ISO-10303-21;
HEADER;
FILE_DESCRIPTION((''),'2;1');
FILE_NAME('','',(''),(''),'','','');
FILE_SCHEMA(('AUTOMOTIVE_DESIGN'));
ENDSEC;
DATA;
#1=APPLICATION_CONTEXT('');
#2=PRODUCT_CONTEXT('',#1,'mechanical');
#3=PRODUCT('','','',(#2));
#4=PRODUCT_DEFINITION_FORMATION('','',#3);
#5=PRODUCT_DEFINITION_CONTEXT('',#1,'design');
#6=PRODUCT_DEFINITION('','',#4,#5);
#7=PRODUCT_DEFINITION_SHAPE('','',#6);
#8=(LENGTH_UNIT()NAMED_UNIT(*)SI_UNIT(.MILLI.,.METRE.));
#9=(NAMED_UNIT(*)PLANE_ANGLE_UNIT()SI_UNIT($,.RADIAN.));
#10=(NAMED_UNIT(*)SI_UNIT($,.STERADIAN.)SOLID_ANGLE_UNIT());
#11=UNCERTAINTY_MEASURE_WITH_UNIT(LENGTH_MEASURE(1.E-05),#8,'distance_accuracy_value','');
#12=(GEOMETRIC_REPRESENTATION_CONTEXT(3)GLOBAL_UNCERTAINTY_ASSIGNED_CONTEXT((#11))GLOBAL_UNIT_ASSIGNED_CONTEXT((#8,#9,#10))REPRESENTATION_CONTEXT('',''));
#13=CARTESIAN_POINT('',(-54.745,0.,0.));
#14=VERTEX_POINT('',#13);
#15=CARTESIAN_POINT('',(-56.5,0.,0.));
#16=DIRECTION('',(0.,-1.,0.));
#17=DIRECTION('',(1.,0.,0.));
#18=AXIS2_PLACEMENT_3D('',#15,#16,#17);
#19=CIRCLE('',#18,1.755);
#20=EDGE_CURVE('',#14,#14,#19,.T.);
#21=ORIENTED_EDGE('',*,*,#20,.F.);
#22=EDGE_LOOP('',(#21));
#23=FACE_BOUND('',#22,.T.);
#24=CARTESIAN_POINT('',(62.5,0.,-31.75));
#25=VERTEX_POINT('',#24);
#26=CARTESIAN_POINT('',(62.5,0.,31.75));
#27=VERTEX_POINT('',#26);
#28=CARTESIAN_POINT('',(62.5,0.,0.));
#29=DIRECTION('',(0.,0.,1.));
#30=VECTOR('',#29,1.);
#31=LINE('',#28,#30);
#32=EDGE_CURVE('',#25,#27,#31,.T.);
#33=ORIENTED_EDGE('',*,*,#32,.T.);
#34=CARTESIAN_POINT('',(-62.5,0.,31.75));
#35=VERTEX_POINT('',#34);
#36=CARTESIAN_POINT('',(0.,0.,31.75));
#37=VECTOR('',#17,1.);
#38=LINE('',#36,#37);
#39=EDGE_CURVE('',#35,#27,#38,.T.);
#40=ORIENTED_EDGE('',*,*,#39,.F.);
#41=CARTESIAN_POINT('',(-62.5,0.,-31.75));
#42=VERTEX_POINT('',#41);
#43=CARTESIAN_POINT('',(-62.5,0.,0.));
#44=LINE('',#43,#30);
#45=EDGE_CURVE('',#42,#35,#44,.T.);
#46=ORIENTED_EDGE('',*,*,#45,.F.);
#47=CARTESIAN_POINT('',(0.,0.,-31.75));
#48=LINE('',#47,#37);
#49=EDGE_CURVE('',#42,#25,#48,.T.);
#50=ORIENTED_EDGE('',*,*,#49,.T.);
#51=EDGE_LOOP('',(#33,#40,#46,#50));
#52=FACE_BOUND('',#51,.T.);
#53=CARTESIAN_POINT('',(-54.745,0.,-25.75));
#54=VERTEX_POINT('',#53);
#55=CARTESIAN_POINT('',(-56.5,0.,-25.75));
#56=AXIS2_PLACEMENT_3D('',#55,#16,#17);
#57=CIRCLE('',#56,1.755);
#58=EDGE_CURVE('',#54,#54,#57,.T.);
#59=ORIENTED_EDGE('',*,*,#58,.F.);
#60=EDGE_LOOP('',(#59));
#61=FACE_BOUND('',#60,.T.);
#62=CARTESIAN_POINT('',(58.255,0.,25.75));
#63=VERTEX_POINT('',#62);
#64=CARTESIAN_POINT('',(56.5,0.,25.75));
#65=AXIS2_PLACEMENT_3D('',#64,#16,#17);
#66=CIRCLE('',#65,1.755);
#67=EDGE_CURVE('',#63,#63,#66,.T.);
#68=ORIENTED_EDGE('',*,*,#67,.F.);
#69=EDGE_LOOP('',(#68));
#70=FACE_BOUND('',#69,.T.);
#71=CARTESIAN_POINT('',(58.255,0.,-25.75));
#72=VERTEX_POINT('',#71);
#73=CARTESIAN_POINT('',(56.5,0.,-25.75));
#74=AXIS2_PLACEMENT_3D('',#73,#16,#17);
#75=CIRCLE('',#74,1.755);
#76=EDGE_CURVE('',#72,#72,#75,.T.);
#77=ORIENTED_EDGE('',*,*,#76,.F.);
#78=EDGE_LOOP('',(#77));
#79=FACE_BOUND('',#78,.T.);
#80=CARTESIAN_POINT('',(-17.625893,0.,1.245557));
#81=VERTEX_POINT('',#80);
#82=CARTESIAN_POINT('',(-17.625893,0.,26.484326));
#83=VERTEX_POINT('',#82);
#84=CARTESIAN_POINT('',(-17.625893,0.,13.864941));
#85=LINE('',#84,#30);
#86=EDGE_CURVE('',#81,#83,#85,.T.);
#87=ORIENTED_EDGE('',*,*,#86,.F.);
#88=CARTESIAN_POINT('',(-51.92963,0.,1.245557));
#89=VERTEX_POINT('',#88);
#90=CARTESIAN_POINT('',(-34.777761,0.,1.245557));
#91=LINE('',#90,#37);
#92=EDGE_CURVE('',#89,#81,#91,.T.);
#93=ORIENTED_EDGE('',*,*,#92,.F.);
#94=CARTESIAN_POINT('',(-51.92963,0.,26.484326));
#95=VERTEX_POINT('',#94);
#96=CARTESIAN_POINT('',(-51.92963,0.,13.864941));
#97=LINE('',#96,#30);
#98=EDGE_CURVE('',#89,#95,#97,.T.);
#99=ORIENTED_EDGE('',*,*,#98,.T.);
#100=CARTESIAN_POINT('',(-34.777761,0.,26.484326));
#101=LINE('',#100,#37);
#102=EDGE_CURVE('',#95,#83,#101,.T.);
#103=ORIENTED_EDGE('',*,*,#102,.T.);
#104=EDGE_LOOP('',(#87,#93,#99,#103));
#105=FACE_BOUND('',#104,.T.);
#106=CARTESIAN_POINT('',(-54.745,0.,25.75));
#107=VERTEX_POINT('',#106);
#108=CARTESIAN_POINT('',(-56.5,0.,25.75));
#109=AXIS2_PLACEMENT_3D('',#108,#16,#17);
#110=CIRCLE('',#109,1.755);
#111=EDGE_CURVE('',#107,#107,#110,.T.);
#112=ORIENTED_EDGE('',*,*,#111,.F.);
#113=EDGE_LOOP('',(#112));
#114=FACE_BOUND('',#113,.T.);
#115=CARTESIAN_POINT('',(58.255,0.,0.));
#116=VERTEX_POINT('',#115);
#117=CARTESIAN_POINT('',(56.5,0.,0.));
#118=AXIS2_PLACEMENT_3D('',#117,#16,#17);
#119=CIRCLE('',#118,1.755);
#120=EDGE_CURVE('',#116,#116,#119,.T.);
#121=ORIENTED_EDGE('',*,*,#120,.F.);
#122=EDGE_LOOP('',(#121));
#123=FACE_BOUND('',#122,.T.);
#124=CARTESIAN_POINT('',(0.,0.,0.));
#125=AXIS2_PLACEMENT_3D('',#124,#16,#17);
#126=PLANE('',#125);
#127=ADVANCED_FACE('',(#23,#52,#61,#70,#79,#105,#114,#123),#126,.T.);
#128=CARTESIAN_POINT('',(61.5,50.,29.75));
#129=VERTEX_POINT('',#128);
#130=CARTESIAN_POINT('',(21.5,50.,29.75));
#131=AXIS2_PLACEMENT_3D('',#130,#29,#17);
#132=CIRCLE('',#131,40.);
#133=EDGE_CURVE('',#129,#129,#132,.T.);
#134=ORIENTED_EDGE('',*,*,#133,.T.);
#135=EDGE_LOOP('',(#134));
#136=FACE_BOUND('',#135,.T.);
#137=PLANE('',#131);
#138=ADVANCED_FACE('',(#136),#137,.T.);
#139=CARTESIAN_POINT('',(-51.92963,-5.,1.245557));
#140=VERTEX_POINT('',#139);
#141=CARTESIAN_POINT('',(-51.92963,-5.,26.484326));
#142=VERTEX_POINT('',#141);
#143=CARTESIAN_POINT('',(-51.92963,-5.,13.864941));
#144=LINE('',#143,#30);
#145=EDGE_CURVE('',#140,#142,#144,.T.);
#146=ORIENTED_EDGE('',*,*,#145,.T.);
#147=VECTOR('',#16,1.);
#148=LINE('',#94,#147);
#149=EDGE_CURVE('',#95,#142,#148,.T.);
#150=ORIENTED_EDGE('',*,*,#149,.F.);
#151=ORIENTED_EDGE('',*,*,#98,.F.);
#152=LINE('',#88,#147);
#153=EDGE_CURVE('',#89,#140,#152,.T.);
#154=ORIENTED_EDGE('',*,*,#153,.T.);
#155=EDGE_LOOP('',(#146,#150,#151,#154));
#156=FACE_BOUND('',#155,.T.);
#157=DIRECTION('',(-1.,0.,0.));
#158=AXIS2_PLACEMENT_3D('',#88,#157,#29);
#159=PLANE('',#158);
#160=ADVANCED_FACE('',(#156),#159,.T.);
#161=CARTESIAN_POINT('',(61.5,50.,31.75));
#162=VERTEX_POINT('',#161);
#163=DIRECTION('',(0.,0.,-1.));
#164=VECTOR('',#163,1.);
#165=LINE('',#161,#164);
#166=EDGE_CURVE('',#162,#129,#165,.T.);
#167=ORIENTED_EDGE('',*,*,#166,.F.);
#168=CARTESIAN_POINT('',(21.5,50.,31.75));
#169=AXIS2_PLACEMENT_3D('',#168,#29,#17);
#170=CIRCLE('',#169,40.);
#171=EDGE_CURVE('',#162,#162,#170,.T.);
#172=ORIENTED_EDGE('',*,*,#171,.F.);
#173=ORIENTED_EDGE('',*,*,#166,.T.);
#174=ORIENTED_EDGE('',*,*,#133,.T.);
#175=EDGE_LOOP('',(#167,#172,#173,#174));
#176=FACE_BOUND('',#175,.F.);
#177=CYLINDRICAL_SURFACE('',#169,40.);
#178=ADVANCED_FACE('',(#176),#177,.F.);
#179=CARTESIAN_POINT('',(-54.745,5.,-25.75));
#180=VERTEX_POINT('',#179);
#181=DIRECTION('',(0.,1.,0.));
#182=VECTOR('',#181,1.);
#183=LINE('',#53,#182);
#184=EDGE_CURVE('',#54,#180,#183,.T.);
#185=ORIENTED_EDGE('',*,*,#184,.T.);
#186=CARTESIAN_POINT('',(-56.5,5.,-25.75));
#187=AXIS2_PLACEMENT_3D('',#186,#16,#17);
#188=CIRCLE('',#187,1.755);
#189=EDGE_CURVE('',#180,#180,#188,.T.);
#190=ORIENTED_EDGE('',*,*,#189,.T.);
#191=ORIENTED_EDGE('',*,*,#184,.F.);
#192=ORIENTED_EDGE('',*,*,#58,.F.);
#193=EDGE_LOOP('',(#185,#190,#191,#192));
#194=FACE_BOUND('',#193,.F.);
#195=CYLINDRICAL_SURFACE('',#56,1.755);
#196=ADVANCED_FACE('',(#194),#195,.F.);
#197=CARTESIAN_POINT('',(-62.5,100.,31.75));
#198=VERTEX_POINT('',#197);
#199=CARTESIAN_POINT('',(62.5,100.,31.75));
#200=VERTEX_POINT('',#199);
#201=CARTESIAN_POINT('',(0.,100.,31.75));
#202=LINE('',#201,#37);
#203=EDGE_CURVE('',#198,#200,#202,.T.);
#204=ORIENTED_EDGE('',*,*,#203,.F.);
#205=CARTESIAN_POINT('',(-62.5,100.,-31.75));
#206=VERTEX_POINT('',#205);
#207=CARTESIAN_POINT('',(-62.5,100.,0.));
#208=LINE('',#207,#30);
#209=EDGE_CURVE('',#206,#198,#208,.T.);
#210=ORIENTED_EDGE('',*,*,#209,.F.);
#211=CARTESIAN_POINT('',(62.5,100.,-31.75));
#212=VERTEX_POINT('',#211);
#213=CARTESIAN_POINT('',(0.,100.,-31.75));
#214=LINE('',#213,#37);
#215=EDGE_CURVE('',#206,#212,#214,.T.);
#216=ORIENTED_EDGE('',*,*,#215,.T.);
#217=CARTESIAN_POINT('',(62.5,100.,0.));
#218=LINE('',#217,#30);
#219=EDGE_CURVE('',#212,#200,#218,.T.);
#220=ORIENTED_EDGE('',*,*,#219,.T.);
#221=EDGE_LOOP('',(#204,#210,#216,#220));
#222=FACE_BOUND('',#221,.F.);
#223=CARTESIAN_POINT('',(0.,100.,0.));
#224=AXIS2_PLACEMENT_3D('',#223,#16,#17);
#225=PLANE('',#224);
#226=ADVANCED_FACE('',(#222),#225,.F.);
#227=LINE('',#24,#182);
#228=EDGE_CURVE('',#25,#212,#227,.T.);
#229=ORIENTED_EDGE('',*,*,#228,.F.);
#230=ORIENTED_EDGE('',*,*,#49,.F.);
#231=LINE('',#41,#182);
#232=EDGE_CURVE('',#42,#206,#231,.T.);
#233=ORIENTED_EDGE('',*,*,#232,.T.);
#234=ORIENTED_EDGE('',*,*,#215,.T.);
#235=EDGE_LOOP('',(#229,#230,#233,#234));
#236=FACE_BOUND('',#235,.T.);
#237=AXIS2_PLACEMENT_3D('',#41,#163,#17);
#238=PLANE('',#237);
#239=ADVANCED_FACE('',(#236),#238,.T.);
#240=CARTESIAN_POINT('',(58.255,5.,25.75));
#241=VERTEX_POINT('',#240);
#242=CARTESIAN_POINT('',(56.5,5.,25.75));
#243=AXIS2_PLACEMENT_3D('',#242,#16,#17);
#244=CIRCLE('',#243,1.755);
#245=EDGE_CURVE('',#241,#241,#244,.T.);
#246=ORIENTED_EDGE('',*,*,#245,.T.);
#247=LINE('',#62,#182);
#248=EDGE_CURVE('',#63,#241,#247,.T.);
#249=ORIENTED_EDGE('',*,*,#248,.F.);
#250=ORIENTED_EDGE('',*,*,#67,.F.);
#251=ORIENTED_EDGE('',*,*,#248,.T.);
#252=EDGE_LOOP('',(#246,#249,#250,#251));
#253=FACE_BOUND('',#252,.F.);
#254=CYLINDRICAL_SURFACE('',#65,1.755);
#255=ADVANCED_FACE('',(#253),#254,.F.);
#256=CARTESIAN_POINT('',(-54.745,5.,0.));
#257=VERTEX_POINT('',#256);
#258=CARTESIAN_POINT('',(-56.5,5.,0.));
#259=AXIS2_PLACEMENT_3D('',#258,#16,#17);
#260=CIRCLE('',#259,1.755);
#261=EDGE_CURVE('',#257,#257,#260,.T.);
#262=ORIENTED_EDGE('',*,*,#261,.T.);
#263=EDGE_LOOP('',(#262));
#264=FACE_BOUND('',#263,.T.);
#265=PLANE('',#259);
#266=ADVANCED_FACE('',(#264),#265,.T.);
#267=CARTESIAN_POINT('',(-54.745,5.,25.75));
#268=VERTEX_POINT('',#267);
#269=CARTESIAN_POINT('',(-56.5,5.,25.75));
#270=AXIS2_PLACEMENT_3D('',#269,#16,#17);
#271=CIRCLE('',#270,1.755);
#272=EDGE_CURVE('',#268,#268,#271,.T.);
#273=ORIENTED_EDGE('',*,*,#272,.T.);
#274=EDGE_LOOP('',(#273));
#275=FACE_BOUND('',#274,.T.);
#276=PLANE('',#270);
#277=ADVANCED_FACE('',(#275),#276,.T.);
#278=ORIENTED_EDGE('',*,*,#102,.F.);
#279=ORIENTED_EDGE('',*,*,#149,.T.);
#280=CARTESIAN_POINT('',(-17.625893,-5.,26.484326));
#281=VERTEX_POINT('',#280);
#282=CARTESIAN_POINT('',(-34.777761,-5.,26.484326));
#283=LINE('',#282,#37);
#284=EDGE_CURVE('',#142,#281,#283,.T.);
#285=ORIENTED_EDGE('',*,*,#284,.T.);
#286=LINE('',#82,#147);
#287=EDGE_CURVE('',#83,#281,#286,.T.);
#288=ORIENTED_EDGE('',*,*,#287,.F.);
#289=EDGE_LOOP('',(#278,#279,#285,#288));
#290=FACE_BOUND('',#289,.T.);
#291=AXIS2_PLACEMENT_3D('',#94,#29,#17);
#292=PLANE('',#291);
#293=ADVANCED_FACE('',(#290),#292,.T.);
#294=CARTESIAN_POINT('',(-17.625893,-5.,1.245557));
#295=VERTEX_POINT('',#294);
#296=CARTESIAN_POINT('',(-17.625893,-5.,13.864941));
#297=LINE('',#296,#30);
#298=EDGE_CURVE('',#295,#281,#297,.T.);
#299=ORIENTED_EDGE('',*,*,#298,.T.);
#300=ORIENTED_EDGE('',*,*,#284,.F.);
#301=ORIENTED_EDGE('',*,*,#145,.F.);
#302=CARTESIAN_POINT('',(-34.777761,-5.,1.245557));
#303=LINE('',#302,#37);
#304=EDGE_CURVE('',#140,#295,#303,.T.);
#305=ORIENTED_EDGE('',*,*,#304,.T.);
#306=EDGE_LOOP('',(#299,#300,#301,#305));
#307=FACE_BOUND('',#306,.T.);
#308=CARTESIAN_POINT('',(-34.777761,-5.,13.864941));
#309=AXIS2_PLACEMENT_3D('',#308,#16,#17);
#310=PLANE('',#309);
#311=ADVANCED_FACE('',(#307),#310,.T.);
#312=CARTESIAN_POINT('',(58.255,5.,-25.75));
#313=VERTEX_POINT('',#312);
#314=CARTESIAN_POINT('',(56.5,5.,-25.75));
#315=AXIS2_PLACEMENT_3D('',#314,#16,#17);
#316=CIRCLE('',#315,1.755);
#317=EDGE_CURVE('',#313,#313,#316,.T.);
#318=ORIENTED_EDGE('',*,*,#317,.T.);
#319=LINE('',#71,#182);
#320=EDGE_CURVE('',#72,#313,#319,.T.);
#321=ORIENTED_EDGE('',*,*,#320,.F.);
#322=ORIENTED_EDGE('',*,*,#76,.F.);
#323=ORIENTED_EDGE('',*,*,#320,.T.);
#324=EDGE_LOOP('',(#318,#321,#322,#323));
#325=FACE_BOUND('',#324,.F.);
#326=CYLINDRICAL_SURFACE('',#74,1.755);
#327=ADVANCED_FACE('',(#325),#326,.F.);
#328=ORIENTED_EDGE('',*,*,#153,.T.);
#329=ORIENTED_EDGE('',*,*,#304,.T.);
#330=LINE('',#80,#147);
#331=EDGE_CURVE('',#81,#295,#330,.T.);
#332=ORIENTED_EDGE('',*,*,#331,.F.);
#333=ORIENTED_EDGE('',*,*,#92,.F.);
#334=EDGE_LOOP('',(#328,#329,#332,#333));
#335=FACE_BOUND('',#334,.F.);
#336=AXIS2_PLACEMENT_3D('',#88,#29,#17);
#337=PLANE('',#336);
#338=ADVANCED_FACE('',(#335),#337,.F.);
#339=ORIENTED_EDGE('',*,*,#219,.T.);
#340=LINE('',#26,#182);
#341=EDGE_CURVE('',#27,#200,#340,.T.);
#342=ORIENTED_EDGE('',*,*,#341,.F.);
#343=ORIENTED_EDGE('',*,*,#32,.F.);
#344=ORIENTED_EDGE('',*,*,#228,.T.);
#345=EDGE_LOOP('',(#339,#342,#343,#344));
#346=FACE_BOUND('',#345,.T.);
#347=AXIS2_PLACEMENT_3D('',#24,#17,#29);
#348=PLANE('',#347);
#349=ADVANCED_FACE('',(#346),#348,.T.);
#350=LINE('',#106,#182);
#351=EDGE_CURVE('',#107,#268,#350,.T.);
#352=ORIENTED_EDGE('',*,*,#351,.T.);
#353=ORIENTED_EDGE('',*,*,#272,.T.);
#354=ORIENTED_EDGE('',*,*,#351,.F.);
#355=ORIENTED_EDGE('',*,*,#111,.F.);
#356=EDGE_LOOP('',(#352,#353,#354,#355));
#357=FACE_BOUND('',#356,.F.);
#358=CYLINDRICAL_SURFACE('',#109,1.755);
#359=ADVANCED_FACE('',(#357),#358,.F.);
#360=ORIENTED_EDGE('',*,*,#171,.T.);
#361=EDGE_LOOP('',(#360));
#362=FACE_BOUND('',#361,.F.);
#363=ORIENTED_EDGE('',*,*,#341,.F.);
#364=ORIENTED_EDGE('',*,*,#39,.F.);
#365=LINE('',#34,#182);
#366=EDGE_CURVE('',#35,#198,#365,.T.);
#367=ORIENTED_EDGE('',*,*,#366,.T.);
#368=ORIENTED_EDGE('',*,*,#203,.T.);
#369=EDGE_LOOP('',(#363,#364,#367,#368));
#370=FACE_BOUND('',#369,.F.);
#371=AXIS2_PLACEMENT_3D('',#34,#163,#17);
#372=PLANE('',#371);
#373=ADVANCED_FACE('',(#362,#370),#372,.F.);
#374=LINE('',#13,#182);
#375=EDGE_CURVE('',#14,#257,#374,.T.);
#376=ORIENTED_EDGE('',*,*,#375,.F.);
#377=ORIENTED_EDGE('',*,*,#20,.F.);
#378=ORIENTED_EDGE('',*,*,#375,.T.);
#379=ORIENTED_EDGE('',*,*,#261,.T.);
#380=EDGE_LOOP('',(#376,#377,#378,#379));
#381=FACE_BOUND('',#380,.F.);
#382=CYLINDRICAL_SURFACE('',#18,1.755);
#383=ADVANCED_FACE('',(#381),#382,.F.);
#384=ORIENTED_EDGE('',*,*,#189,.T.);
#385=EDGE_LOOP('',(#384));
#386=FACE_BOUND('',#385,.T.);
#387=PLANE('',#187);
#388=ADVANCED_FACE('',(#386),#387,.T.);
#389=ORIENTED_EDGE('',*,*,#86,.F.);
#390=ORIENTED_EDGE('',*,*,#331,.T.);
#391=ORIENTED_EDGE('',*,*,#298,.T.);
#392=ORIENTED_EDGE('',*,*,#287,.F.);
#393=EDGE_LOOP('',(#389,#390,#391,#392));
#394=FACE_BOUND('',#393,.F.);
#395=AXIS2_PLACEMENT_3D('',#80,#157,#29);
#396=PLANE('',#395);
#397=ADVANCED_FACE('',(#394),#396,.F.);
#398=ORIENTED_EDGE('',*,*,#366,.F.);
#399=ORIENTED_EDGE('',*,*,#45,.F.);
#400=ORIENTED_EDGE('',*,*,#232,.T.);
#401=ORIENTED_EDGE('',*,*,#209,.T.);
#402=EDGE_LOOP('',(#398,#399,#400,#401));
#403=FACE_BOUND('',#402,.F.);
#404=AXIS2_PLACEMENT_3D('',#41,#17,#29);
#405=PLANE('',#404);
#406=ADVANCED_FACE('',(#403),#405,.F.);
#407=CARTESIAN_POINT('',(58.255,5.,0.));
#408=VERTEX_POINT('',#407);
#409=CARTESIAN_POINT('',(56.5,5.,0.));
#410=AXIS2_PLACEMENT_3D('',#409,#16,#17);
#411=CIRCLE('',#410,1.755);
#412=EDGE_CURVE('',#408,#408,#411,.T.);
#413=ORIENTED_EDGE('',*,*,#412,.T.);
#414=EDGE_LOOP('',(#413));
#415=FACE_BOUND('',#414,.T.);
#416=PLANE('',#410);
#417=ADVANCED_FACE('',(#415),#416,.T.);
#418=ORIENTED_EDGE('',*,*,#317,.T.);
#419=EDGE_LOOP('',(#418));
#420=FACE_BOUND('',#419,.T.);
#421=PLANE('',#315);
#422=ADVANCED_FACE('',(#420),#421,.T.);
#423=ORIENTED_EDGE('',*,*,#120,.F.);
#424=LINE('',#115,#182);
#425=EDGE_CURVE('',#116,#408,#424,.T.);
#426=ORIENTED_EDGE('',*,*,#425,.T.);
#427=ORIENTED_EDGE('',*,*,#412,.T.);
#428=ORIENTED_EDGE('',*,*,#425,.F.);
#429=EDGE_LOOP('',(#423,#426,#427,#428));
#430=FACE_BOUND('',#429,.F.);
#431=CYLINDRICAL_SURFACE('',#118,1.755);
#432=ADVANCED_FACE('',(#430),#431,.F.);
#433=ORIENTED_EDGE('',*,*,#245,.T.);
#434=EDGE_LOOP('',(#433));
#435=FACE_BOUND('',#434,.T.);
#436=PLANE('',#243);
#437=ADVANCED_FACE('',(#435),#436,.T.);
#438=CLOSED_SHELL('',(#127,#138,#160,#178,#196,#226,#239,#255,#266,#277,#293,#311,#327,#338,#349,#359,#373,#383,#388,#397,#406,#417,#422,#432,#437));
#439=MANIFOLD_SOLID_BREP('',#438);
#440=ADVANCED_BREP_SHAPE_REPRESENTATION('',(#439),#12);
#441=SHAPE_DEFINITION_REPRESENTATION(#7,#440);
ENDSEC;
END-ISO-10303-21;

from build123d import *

# Parameters (mm, degrees)
F0_W     = 125
F0_H     = 63.5
F0_R     = 1.755
F0_W_2   = 34.3037378043
F0_H_2   = 25.238768314
F1_DEPTH = 100
F2_DEPTH = 5
F3_DEPTH = 5
F4_R     = 40
F5_DEPTH = 2


# Not quite as in the source:
# - a feature names something its author has since deleted; it is built from what else it names


with BuildPart() as f1:
    # F0 (on Front) → F1 (new body)
    with BuildSketch(Plane.XZ):
        Rectangle(F0_W, F0_H)
        with Locations((-56.5, -25.75)):
            Circle(F0_R, mode=Mode.SUBTRACT)
        with Locations((56.5, -25.75)):
            Circle(F0_R, mode=Mode.SUBTRACT)
        with Locations((-56.5, 0)):
            Circle(F0_R, mode=Mode.SUBTRACT)
        with Locations((-34.777761437, 13.8649413711)):
            Rectangle(F0_W_2, F0_H_2, mode=Mode.SUBTRACT)
        with Locations((-56.5, 25.75)):
            Circle(F0_R, mode=Mode.SUBTRACT)
        with Locations((56.5, 0)):
            Circle(F0_R, mode=Mode.SUBTRACT)
        with Locations((56.5, 25.75)):
            Circle(F0_R, mode=Mode.SUBTRACT)
        with Locations((-34.777761437, 13.8649413711)):
            Rectangle(F0_W_2, F0_H_2)
        with Locations((-56.5, 25.75)):
            Circle(F0_R)
        with Locations((-56.5, 0)):
            Circle(F0_R)
        with Locations((-56.5, -25.75)):
            Circle(F0_R)
        with Locations((56.5, -25.75)):
            Circle(F0_R)
        with Locations((56.5, 0)):
            Circle(F0_R)
        with Locations((56.5, 25.75)):
            Circle(F0_R)
    extrude(amount=-F1_DEPTH)

    # F0 (on Front) → F2 (join)
    with BuildSketch(Plane.XZ):
        with Locations((-34.777761437, 13.8649413711)):
            Rectangle(F0_W_2, F0_H_2)
    extrude(amount=F2_DEPTH)

    # F0 (on Front) → F3 (cut)
    with BuildSketch(Plane.XZ):
        with Locations((-56.5, 25.75)):
            Circle(F0_R)
        with Locations((-56.5, 0)):
            Circle(F0_R)
        with Locations((-56.5, -25.75)):
            Circle(F0_R)
        with Locations((56.5, -25.75)):
            Circle(F0_R)
        with Locations((56.5, 0)):
            Circle(F0_R)
        with Locations((56.5, 25.75)):
            Circle(F0_R)
    extrude(amount=-F3_DEPTH, mode=Mode.SUBTRACT)

    # F4 (on face) → F5 (cut)
    with BuildSketch(Plane.XY.offset(31.75)):
        with Locations((21.5, 50)):
            Circle(F4_R)
    extrude(amount=-F5_DEPTH, mode=Mode.SUBTRACT)


solid = f1.part
